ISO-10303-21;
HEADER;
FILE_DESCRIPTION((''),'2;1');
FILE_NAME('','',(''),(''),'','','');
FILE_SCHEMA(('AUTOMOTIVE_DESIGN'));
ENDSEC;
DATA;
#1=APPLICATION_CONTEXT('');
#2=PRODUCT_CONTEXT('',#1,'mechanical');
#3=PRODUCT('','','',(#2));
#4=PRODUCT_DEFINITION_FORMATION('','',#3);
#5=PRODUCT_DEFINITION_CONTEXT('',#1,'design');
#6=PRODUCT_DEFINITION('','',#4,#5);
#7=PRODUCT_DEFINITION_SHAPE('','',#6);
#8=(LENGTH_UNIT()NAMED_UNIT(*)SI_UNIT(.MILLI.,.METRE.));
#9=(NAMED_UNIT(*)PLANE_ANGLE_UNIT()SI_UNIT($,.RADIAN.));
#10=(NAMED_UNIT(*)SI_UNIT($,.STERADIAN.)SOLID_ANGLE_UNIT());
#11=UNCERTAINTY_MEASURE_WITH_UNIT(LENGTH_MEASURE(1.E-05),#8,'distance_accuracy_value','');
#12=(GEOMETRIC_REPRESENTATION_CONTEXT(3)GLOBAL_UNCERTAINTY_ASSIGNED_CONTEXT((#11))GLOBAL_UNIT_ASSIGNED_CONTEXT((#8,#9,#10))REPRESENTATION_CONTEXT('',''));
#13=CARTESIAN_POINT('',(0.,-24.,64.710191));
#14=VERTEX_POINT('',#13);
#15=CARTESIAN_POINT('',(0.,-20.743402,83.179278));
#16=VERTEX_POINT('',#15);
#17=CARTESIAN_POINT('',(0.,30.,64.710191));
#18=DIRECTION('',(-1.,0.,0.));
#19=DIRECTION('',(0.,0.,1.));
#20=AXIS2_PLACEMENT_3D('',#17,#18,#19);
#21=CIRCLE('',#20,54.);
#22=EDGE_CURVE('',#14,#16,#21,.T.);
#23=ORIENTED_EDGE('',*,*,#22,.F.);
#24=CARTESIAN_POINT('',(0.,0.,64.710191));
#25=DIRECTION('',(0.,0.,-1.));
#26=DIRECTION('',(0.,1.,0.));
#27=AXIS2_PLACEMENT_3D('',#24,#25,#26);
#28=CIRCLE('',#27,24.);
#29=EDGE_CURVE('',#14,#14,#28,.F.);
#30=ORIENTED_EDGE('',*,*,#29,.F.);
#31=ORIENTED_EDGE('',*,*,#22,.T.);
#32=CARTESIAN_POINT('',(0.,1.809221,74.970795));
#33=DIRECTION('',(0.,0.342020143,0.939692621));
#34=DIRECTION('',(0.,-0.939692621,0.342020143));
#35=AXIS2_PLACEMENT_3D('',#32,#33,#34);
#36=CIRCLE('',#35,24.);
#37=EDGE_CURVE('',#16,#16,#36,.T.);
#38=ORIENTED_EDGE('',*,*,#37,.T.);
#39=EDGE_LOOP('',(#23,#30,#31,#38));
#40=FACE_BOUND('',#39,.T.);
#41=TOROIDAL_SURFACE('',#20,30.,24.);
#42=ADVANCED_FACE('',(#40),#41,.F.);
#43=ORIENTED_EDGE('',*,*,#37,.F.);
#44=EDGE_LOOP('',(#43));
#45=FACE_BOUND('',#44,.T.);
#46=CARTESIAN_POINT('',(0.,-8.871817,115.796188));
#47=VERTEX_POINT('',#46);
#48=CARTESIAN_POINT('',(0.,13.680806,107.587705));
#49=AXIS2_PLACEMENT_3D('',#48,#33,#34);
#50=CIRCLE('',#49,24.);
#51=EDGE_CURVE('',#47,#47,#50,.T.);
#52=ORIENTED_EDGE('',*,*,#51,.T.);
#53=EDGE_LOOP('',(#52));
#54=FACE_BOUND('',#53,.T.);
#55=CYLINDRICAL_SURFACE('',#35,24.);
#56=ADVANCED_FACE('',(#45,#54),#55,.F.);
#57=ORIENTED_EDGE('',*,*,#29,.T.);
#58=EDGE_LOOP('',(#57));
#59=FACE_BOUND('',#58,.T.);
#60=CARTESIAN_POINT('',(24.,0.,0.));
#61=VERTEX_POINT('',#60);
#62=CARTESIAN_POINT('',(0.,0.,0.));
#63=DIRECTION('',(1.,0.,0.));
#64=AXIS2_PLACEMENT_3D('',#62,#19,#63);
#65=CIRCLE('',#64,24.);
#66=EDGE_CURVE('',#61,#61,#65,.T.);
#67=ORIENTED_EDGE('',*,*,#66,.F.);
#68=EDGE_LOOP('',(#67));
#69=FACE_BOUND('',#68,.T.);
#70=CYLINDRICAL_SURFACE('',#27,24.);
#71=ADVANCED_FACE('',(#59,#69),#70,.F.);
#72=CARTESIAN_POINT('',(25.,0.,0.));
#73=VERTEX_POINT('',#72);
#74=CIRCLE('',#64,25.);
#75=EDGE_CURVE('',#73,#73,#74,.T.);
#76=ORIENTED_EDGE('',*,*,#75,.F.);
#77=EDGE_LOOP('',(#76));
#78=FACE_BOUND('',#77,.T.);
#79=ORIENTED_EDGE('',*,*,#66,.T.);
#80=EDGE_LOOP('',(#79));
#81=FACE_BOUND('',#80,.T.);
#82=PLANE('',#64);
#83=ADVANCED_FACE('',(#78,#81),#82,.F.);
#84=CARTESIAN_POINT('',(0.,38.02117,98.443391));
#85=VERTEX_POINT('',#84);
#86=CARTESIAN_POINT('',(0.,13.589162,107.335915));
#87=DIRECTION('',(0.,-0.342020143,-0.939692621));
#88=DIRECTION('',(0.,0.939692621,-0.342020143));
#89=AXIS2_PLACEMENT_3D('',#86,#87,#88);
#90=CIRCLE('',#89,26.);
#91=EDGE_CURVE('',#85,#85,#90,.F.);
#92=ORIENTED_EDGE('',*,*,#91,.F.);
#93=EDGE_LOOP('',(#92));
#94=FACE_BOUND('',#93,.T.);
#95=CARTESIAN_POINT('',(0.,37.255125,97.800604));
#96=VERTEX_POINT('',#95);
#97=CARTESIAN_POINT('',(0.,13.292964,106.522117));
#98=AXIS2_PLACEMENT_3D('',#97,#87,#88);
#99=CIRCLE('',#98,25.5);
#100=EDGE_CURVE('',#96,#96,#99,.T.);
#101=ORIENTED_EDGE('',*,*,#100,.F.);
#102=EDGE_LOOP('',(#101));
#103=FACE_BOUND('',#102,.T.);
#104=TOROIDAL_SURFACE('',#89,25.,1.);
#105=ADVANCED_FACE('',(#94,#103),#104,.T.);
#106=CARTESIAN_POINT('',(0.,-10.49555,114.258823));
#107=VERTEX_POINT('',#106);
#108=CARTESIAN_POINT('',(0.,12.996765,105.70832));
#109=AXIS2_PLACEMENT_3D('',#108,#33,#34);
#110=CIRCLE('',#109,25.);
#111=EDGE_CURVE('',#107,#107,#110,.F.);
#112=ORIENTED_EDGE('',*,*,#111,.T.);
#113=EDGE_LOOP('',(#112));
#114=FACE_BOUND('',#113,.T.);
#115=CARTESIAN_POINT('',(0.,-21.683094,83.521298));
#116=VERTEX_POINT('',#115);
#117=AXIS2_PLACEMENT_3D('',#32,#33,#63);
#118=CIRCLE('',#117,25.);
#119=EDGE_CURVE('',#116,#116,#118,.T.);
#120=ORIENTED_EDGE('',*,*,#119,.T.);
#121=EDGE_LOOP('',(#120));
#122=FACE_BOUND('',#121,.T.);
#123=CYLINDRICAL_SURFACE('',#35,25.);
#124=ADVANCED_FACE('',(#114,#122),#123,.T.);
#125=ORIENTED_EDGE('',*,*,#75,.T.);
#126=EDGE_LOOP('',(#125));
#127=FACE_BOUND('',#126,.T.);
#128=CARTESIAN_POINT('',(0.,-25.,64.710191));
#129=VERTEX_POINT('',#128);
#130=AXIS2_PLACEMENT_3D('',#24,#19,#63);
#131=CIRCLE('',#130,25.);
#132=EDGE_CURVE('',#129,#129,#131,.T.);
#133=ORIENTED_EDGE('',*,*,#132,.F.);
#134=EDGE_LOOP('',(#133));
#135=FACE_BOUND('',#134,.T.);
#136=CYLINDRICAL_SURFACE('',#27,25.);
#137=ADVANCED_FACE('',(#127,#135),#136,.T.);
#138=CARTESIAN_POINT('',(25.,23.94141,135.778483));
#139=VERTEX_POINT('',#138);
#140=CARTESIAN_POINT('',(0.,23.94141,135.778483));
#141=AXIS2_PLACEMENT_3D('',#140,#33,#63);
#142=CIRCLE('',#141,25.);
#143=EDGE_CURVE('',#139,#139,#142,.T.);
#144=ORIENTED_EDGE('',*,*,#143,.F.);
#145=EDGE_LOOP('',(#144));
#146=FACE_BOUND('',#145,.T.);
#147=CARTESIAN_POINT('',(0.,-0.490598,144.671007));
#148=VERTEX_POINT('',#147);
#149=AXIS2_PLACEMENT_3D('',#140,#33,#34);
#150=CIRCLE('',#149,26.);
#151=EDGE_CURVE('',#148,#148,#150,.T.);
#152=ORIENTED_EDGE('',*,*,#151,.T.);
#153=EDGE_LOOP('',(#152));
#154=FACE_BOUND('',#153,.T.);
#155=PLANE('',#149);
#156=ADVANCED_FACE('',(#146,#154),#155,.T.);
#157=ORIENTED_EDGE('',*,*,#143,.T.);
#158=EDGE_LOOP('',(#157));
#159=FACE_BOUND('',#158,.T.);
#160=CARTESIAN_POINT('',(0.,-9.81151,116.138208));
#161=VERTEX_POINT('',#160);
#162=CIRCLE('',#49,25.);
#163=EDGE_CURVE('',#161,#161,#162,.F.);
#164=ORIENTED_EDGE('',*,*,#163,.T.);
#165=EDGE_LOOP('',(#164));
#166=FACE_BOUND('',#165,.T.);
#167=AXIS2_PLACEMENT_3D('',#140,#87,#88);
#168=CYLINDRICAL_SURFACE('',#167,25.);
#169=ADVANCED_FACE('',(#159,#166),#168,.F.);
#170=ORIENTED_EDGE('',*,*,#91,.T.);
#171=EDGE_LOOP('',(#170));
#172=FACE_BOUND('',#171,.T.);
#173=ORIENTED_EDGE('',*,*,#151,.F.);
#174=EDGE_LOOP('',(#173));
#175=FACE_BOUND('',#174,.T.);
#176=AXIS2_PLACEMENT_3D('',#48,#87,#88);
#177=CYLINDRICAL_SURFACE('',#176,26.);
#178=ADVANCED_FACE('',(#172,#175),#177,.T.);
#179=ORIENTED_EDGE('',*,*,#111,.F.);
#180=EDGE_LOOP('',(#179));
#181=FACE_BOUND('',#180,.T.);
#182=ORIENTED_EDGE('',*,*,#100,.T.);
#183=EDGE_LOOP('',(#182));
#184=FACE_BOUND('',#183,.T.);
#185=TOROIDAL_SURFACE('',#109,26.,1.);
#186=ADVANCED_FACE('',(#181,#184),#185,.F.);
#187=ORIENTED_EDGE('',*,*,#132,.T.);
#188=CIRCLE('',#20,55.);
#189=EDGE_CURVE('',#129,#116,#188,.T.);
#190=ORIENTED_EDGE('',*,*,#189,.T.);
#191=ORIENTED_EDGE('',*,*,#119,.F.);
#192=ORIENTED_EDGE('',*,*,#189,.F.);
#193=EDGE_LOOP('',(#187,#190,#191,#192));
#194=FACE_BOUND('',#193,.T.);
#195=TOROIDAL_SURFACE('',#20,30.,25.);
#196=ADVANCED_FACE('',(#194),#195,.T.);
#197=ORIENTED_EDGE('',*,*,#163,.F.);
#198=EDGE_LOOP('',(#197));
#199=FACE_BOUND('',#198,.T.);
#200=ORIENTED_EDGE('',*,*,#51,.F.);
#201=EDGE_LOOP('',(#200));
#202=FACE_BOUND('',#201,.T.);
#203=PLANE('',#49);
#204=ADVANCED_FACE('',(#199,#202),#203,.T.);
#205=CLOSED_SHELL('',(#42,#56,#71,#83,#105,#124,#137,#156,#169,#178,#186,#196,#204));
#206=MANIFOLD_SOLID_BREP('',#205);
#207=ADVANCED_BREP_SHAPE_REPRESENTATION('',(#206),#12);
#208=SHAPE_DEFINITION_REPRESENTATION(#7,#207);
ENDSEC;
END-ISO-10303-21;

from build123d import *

# Parameters (mm, degrees)
ESQUISSE6_R        = 25
ESQUISSE6_R_2      = 24
ESQUISSE8_R        = 26.000000000000004
ESQUISSE8_R_2      = 24.000000000000004
EXTRU_MINCE1_DEPTH = 1
EXTRU_MINCE2_START = 30
ESQUISSE9_R        = 26
ESQUISSE9_R_2      = 25
EXTRU_MINCE2_DEPTH = 30
CONG_1_R           = 1
CONG_2_R           = 1


with BuildPart() as part:
    # Balayage-Mince2: sweep along a path in Esquisse7
    with BuildLine(Plane(origin=(0, 0, 0), x_dir=(0, 0, -1), z_dir=(1, 0, 0))) as balayage_mince2_path:
        Line((0, 0), (-64.71019057874605, -6.94e-15))
        ThreePointArc((-64.71019057874605, -6.94e-15), (-69.91963590875396, 0.45576740963375073), (-74.97079487851613, 1.8092213764227365))
        Line((-74.97079487851613, 1.8092213764227365), (-106.64801221065042, 13.338785589701102))
    # Esquisse6 → Balayage-Mince2 (sweep)
    with BuildSketch(Plane.XY):
        Circle(ESQUISSE6_R)
        Circle(ESQUISSE6_R_2, mode=Mode.SUBTRACT)
    sweep(path=balayage_mince2_path.line)



with BuildPart() as body_2:
    # Esquisse8 → Extru.-Mince1 (new body)
    with BuildSketch(Plane(origin=(0, 35.836351928730004, 98.45956771981464), x_dir=(1, 0, 0), z_dir=(0, 0.34202014332566966, 0.9396926207859081))):
        with Locations((0, -23.94141003279684)):
            Circle(ESQUISSE8_R)
        with Locations((0, -23.94141003279684)):
            Circle(ESQUISSE8_R_2, mode=Mode.SUBTRACT)
    extrude(amount=EXTRU_MINCE1_DEPTH)


with BuildPart() as part_1:
    add(part.part)

    add(body_2.part)  # Extru.-Mince2 merges body 2
    # Esquisse9 → Extru.-Mince2 (add)
    with BuildSketch(Plane(origin=(0, 36.17837207205572, 99.39926034060053), x_dir=(1, 0, 0), z_dir=(0, 0.3420201433256696, 0.9396926207859081)).offset(EXTRU_MINCE2_START)):
        with Locations((0, -23.941410032796895)):
            Circle(ESQUISSE9_R)
        with Locations((0, -23.941410032796895)):
            Circle(ESQUISSE9_R_2, mode=Mode.SUBTRACT)
    extrude(amount=-EXTRU_MINCE2_DEPTH)

    # Congé1
    cong_1_edges = [part_1.edges().sort_by_distance(p)[0] for p in [
        (-25, 13.338785589701132, 106.6480122106504),
    ]]
    fillet(cong_1_edges, radius=CONG_1_R - 0.0001)  # a hair under: the kernel refuses the full size

    # Congé2
    cong_2_edges = [part_1.edges().sort_by_distance(p)[0] for p in [
        (-26.000000000000004, 13.33878558970111, 106.64801221065045),
    ]]
    fillet(cong_2_edges, radius=CONG_2_R)


solid = part_1.part
